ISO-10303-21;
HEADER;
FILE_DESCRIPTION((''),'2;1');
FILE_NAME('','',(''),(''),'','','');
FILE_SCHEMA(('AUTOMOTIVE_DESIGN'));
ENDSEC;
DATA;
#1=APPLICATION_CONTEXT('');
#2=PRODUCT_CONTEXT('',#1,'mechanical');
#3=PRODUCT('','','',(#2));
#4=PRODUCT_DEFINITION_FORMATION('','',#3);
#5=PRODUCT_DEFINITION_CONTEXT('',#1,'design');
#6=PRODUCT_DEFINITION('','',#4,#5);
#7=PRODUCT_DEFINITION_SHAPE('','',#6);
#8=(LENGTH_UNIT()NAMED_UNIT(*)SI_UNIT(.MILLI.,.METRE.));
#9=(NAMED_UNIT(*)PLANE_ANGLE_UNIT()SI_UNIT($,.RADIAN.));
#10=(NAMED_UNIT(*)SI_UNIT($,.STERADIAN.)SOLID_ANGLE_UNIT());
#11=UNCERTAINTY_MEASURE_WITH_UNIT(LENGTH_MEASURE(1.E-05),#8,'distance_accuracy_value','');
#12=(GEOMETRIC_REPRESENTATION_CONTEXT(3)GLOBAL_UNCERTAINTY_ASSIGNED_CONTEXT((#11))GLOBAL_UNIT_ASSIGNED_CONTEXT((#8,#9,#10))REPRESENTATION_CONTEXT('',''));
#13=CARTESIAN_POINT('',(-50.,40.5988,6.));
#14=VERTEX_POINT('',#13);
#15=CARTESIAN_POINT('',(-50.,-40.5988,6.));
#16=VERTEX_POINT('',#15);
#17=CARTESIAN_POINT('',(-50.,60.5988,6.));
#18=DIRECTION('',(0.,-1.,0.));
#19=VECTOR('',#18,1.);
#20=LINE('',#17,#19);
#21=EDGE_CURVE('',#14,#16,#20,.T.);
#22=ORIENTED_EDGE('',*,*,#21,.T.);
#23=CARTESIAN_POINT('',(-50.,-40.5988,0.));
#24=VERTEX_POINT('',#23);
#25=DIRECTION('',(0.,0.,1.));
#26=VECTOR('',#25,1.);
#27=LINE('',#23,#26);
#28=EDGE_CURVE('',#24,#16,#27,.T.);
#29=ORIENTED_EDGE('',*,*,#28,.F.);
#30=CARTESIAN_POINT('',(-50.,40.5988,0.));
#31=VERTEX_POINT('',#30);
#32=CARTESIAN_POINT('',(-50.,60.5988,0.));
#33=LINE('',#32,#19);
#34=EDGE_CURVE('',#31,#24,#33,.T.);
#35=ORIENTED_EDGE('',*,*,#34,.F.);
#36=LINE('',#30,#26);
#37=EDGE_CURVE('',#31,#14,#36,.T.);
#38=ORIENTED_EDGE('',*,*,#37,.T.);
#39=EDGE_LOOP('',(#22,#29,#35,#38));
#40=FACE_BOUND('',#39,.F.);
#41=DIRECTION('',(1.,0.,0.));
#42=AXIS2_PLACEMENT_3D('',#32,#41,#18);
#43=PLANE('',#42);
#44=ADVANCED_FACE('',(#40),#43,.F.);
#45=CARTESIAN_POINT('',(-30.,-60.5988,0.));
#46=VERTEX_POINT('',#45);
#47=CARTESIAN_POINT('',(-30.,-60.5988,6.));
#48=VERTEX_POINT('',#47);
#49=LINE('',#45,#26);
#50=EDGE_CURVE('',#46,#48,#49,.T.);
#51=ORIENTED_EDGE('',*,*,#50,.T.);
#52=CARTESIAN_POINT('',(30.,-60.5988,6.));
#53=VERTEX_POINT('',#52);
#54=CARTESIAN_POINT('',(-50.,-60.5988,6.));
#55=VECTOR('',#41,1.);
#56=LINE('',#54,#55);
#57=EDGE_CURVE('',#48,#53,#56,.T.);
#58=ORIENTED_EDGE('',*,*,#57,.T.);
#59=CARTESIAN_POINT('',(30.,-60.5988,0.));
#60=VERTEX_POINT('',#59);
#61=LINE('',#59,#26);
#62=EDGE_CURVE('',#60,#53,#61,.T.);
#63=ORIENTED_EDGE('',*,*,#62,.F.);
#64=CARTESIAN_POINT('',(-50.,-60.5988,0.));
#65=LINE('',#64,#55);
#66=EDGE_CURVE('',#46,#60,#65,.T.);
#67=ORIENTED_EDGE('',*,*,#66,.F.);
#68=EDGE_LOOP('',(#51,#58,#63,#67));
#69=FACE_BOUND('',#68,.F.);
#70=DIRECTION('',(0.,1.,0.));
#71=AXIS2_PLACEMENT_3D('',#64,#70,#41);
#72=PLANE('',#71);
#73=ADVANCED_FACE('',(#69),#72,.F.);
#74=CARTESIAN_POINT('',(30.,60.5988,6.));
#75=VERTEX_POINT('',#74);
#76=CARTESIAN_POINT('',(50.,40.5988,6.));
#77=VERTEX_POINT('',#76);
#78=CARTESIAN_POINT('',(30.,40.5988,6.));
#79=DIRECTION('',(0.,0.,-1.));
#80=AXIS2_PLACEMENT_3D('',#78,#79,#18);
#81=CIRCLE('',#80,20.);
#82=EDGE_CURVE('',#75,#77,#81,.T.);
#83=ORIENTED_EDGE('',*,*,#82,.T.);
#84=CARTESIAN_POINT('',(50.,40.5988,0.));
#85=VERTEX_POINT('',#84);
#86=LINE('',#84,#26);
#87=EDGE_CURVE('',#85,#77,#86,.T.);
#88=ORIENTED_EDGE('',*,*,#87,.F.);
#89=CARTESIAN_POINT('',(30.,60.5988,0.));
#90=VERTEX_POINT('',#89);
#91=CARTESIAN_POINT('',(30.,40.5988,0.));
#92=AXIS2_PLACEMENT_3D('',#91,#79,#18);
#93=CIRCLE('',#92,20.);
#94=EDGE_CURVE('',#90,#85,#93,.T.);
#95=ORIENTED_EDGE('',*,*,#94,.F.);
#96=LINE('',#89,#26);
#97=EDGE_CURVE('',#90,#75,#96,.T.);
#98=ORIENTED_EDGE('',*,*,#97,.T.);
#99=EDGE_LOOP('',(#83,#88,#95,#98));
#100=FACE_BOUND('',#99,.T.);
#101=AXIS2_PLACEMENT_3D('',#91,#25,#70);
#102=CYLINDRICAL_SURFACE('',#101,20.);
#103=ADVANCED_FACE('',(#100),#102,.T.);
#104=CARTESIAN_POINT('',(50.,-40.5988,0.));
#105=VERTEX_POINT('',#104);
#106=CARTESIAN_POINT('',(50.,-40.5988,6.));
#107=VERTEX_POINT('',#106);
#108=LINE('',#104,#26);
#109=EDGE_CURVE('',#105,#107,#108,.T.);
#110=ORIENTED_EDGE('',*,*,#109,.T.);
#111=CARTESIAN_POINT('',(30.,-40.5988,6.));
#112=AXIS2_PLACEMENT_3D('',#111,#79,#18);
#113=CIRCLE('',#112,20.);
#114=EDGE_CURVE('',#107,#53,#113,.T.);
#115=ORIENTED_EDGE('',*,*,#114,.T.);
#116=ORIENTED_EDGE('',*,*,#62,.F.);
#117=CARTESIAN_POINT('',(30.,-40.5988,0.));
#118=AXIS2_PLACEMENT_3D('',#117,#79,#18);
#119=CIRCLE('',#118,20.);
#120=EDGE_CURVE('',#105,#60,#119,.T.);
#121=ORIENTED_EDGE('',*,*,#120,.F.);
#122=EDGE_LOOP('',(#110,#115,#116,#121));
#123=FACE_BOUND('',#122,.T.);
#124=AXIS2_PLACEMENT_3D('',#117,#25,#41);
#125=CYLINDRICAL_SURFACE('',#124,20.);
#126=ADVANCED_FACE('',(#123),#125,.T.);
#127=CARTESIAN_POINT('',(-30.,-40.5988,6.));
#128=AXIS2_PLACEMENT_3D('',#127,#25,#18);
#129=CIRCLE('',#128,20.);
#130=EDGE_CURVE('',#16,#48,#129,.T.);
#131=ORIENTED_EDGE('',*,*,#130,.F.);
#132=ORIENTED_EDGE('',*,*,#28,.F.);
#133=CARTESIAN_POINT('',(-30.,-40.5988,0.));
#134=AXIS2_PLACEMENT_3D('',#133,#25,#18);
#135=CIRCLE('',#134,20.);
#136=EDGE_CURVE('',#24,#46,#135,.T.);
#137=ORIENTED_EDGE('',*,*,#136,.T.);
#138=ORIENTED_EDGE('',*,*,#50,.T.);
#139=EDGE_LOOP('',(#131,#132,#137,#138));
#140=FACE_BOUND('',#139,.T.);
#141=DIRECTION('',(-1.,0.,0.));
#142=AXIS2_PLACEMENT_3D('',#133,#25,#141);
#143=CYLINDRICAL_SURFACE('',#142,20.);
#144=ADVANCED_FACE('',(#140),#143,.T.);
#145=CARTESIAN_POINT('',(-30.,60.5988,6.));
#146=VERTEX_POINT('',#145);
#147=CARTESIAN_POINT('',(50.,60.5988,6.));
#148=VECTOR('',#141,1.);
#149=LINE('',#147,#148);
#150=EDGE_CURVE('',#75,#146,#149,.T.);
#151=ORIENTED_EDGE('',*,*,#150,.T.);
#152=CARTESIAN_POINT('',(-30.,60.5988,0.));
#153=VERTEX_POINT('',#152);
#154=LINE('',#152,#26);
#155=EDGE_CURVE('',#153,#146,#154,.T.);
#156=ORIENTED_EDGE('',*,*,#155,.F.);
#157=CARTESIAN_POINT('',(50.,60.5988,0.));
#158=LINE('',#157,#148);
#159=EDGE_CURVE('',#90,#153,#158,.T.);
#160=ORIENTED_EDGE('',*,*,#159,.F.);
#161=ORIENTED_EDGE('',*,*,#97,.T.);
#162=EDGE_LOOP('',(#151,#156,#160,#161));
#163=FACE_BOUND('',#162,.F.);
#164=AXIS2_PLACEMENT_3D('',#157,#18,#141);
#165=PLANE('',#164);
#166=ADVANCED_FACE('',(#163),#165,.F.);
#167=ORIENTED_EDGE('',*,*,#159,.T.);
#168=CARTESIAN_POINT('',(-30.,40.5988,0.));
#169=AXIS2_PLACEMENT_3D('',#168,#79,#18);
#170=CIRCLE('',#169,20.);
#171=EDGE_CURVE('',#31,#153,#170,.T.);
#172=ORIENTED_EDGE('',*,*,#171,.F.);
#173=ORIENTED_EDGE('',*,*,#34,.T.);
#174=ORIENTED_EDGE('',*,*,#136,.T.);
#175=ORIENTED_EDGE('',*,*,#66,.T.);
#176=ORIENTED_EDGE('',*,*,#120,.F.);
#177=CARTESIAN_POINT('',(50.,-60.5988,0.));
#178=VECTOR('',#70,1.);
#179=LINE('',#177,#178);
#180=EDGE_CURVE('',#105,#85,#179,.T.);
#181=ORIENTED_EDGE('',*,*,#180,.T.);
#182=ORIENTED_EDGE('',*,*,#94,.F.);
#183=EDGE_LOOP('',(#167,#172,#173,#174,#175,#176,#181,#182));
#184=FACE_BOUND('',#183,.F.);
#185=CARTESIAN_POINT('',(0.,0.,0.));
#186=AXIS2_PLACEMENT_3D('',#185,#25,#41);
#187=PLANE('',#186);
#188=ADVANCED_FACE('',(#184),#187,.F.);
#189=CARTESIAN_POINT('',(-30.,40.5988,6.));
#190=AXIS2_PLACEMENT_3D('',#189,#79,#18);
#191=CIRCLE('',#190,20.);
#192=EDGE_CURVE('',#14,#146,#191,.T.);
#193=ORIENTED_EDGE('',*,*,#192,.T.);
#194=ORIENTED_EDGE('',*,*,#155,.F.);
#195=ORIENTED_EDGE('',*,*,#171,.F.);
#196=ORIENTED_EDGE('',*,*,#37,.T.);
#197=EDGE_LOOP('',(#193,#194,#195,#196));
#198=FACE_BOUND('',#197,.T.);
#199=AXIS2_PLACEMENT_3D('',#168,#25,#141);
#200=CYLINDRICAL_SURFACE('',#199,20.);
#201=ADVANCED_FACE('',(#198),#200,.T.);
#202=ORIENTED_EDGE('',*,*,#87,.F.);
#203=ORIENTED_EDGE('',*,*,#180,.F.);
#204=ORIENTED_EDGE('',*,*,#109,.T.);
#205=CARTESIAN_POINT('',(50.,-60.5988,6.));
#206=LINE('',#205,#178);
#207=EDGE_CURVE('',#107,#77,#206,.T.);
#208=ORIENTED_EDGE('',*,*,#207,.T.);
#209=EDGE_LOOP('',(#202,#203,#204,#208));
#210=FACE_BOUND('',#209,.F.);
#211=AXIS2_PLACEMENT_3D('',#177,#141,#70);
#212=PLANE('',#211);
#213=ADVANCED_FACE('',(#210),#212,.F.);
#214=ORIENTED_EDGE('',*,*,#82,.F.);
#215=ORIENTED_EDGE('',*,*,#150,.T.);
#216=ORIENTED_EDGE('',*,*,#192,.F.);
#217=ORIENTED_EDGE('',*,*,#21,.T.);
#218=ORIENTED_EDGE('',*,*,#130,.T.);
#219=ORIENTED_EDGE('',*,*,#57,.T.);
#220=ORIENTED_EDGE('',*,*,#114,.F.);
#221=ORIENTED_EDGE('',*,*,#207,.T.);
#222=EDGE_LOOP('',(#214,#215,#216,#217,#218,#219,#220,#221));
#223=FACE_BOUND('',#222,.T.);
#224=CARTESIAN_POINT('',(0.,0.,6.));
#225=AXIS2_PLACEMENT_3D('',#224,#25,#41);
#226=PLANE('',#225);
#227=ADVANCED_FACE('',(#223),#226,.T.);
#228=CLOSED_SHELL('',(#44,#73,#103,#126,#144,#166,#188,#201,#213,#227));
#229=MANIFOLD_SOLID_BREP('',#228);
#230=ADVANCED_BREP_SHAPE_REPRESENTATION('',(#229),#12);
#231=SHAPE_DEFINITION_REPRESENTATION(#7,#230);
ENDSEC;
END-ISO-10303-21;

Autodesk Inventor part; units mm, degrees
ref_plane "YZ Plane" through (0, 0, 0) normal (1, 0, 0) x (0, 1, 0)
ref_plane "XZ Plane" through (0, 0, 0) normal (0, 1, 0) x (-1, 0, 0)
ref_plane "XY Plane" through (0, 0, 0) normal (0, 0, 1) x (1, 0, 0)
sketch "Sketch1" plane through (0, 0, 0) normal (0, 0, 1) x (1, 0, 0)
  line L0 (-50, -60.5988) -> (50, -60.5988)
  line L1 (50, -60.5988) -> (50, 60.5988)
  line L2 (50, 60.5988) -> (-50, 60.5988)
  line L3 (-50, 60.5988) -> (-50, -60.5988)
  line L4 (-50, -60.5988) -> (50, 60.5988) construction
  line L5 (50, -60.5988) -> (-50, 60.5988) construction
  point P0 (0, 0)
  dimension "d0" = 100
  dimension "d1" = 121.1976
extrude "Plate1" add sketch "Sketch1" along normal blind 6
fillet "Corner Round1" radius 20 4 edges at (50, -60.5988, 3) (-50, -60.5988, 3) (-50, 60.5988, 3) (50, 60.5988, 3)
sketch "Sketch5" plane through (0, 0, 6) normal (0, 0, 1) x (1, 0, 0)
  line L0 (50, 40.5988) -> (50, -40.5988) projected
  line L1 (50, 30.5988) -> (-50, 30.5988)
  line L2 (-50, -40.5988) -> (-50, 40.5988) projected
  line L3 (-30, 60.5988) -> (30, 60.5988) projected
  point P0 (0, 0)
  dimension "d23" = 30
feature "Fold1" [suppressed]
equation "\"d1\" = Legs_Upper_plate_lenght"
equation "\"d2\" = Thickness"
equation "\"d24\" = BendReliefWidth"
equation "\"d25\" = BendReliefDepth"
equation "\"d26\" = MinimumRemnant"
equation "\"d27\" = TransitionRadius"
equation "\"d29\" = BendRadius"
equation "\"BendReliefWidth\" = Thickness"
equation "\"BendReliefDepth\" = 0.5 * Thickness"
equation "\"CornerReliefSize\" = 4 * Thickness"
equation "\"MinimumRemnant\" = 2 * Thickness"
equation "\"TransitionRadius\" = BendRadius"
equation "\"JacobiRadiusSize\" = BendRadius"
equation "\"GapSize\" = Thickness"
equation "\"Legs_Upper_plate_lenght\" = 121.197614"
equation "\"Thickness\" = 6"
equation "\"BendRadius\" = 5"
properties part number "PRS 9694 leg plate for filter_D1200 940" material "Stainless Steel"
